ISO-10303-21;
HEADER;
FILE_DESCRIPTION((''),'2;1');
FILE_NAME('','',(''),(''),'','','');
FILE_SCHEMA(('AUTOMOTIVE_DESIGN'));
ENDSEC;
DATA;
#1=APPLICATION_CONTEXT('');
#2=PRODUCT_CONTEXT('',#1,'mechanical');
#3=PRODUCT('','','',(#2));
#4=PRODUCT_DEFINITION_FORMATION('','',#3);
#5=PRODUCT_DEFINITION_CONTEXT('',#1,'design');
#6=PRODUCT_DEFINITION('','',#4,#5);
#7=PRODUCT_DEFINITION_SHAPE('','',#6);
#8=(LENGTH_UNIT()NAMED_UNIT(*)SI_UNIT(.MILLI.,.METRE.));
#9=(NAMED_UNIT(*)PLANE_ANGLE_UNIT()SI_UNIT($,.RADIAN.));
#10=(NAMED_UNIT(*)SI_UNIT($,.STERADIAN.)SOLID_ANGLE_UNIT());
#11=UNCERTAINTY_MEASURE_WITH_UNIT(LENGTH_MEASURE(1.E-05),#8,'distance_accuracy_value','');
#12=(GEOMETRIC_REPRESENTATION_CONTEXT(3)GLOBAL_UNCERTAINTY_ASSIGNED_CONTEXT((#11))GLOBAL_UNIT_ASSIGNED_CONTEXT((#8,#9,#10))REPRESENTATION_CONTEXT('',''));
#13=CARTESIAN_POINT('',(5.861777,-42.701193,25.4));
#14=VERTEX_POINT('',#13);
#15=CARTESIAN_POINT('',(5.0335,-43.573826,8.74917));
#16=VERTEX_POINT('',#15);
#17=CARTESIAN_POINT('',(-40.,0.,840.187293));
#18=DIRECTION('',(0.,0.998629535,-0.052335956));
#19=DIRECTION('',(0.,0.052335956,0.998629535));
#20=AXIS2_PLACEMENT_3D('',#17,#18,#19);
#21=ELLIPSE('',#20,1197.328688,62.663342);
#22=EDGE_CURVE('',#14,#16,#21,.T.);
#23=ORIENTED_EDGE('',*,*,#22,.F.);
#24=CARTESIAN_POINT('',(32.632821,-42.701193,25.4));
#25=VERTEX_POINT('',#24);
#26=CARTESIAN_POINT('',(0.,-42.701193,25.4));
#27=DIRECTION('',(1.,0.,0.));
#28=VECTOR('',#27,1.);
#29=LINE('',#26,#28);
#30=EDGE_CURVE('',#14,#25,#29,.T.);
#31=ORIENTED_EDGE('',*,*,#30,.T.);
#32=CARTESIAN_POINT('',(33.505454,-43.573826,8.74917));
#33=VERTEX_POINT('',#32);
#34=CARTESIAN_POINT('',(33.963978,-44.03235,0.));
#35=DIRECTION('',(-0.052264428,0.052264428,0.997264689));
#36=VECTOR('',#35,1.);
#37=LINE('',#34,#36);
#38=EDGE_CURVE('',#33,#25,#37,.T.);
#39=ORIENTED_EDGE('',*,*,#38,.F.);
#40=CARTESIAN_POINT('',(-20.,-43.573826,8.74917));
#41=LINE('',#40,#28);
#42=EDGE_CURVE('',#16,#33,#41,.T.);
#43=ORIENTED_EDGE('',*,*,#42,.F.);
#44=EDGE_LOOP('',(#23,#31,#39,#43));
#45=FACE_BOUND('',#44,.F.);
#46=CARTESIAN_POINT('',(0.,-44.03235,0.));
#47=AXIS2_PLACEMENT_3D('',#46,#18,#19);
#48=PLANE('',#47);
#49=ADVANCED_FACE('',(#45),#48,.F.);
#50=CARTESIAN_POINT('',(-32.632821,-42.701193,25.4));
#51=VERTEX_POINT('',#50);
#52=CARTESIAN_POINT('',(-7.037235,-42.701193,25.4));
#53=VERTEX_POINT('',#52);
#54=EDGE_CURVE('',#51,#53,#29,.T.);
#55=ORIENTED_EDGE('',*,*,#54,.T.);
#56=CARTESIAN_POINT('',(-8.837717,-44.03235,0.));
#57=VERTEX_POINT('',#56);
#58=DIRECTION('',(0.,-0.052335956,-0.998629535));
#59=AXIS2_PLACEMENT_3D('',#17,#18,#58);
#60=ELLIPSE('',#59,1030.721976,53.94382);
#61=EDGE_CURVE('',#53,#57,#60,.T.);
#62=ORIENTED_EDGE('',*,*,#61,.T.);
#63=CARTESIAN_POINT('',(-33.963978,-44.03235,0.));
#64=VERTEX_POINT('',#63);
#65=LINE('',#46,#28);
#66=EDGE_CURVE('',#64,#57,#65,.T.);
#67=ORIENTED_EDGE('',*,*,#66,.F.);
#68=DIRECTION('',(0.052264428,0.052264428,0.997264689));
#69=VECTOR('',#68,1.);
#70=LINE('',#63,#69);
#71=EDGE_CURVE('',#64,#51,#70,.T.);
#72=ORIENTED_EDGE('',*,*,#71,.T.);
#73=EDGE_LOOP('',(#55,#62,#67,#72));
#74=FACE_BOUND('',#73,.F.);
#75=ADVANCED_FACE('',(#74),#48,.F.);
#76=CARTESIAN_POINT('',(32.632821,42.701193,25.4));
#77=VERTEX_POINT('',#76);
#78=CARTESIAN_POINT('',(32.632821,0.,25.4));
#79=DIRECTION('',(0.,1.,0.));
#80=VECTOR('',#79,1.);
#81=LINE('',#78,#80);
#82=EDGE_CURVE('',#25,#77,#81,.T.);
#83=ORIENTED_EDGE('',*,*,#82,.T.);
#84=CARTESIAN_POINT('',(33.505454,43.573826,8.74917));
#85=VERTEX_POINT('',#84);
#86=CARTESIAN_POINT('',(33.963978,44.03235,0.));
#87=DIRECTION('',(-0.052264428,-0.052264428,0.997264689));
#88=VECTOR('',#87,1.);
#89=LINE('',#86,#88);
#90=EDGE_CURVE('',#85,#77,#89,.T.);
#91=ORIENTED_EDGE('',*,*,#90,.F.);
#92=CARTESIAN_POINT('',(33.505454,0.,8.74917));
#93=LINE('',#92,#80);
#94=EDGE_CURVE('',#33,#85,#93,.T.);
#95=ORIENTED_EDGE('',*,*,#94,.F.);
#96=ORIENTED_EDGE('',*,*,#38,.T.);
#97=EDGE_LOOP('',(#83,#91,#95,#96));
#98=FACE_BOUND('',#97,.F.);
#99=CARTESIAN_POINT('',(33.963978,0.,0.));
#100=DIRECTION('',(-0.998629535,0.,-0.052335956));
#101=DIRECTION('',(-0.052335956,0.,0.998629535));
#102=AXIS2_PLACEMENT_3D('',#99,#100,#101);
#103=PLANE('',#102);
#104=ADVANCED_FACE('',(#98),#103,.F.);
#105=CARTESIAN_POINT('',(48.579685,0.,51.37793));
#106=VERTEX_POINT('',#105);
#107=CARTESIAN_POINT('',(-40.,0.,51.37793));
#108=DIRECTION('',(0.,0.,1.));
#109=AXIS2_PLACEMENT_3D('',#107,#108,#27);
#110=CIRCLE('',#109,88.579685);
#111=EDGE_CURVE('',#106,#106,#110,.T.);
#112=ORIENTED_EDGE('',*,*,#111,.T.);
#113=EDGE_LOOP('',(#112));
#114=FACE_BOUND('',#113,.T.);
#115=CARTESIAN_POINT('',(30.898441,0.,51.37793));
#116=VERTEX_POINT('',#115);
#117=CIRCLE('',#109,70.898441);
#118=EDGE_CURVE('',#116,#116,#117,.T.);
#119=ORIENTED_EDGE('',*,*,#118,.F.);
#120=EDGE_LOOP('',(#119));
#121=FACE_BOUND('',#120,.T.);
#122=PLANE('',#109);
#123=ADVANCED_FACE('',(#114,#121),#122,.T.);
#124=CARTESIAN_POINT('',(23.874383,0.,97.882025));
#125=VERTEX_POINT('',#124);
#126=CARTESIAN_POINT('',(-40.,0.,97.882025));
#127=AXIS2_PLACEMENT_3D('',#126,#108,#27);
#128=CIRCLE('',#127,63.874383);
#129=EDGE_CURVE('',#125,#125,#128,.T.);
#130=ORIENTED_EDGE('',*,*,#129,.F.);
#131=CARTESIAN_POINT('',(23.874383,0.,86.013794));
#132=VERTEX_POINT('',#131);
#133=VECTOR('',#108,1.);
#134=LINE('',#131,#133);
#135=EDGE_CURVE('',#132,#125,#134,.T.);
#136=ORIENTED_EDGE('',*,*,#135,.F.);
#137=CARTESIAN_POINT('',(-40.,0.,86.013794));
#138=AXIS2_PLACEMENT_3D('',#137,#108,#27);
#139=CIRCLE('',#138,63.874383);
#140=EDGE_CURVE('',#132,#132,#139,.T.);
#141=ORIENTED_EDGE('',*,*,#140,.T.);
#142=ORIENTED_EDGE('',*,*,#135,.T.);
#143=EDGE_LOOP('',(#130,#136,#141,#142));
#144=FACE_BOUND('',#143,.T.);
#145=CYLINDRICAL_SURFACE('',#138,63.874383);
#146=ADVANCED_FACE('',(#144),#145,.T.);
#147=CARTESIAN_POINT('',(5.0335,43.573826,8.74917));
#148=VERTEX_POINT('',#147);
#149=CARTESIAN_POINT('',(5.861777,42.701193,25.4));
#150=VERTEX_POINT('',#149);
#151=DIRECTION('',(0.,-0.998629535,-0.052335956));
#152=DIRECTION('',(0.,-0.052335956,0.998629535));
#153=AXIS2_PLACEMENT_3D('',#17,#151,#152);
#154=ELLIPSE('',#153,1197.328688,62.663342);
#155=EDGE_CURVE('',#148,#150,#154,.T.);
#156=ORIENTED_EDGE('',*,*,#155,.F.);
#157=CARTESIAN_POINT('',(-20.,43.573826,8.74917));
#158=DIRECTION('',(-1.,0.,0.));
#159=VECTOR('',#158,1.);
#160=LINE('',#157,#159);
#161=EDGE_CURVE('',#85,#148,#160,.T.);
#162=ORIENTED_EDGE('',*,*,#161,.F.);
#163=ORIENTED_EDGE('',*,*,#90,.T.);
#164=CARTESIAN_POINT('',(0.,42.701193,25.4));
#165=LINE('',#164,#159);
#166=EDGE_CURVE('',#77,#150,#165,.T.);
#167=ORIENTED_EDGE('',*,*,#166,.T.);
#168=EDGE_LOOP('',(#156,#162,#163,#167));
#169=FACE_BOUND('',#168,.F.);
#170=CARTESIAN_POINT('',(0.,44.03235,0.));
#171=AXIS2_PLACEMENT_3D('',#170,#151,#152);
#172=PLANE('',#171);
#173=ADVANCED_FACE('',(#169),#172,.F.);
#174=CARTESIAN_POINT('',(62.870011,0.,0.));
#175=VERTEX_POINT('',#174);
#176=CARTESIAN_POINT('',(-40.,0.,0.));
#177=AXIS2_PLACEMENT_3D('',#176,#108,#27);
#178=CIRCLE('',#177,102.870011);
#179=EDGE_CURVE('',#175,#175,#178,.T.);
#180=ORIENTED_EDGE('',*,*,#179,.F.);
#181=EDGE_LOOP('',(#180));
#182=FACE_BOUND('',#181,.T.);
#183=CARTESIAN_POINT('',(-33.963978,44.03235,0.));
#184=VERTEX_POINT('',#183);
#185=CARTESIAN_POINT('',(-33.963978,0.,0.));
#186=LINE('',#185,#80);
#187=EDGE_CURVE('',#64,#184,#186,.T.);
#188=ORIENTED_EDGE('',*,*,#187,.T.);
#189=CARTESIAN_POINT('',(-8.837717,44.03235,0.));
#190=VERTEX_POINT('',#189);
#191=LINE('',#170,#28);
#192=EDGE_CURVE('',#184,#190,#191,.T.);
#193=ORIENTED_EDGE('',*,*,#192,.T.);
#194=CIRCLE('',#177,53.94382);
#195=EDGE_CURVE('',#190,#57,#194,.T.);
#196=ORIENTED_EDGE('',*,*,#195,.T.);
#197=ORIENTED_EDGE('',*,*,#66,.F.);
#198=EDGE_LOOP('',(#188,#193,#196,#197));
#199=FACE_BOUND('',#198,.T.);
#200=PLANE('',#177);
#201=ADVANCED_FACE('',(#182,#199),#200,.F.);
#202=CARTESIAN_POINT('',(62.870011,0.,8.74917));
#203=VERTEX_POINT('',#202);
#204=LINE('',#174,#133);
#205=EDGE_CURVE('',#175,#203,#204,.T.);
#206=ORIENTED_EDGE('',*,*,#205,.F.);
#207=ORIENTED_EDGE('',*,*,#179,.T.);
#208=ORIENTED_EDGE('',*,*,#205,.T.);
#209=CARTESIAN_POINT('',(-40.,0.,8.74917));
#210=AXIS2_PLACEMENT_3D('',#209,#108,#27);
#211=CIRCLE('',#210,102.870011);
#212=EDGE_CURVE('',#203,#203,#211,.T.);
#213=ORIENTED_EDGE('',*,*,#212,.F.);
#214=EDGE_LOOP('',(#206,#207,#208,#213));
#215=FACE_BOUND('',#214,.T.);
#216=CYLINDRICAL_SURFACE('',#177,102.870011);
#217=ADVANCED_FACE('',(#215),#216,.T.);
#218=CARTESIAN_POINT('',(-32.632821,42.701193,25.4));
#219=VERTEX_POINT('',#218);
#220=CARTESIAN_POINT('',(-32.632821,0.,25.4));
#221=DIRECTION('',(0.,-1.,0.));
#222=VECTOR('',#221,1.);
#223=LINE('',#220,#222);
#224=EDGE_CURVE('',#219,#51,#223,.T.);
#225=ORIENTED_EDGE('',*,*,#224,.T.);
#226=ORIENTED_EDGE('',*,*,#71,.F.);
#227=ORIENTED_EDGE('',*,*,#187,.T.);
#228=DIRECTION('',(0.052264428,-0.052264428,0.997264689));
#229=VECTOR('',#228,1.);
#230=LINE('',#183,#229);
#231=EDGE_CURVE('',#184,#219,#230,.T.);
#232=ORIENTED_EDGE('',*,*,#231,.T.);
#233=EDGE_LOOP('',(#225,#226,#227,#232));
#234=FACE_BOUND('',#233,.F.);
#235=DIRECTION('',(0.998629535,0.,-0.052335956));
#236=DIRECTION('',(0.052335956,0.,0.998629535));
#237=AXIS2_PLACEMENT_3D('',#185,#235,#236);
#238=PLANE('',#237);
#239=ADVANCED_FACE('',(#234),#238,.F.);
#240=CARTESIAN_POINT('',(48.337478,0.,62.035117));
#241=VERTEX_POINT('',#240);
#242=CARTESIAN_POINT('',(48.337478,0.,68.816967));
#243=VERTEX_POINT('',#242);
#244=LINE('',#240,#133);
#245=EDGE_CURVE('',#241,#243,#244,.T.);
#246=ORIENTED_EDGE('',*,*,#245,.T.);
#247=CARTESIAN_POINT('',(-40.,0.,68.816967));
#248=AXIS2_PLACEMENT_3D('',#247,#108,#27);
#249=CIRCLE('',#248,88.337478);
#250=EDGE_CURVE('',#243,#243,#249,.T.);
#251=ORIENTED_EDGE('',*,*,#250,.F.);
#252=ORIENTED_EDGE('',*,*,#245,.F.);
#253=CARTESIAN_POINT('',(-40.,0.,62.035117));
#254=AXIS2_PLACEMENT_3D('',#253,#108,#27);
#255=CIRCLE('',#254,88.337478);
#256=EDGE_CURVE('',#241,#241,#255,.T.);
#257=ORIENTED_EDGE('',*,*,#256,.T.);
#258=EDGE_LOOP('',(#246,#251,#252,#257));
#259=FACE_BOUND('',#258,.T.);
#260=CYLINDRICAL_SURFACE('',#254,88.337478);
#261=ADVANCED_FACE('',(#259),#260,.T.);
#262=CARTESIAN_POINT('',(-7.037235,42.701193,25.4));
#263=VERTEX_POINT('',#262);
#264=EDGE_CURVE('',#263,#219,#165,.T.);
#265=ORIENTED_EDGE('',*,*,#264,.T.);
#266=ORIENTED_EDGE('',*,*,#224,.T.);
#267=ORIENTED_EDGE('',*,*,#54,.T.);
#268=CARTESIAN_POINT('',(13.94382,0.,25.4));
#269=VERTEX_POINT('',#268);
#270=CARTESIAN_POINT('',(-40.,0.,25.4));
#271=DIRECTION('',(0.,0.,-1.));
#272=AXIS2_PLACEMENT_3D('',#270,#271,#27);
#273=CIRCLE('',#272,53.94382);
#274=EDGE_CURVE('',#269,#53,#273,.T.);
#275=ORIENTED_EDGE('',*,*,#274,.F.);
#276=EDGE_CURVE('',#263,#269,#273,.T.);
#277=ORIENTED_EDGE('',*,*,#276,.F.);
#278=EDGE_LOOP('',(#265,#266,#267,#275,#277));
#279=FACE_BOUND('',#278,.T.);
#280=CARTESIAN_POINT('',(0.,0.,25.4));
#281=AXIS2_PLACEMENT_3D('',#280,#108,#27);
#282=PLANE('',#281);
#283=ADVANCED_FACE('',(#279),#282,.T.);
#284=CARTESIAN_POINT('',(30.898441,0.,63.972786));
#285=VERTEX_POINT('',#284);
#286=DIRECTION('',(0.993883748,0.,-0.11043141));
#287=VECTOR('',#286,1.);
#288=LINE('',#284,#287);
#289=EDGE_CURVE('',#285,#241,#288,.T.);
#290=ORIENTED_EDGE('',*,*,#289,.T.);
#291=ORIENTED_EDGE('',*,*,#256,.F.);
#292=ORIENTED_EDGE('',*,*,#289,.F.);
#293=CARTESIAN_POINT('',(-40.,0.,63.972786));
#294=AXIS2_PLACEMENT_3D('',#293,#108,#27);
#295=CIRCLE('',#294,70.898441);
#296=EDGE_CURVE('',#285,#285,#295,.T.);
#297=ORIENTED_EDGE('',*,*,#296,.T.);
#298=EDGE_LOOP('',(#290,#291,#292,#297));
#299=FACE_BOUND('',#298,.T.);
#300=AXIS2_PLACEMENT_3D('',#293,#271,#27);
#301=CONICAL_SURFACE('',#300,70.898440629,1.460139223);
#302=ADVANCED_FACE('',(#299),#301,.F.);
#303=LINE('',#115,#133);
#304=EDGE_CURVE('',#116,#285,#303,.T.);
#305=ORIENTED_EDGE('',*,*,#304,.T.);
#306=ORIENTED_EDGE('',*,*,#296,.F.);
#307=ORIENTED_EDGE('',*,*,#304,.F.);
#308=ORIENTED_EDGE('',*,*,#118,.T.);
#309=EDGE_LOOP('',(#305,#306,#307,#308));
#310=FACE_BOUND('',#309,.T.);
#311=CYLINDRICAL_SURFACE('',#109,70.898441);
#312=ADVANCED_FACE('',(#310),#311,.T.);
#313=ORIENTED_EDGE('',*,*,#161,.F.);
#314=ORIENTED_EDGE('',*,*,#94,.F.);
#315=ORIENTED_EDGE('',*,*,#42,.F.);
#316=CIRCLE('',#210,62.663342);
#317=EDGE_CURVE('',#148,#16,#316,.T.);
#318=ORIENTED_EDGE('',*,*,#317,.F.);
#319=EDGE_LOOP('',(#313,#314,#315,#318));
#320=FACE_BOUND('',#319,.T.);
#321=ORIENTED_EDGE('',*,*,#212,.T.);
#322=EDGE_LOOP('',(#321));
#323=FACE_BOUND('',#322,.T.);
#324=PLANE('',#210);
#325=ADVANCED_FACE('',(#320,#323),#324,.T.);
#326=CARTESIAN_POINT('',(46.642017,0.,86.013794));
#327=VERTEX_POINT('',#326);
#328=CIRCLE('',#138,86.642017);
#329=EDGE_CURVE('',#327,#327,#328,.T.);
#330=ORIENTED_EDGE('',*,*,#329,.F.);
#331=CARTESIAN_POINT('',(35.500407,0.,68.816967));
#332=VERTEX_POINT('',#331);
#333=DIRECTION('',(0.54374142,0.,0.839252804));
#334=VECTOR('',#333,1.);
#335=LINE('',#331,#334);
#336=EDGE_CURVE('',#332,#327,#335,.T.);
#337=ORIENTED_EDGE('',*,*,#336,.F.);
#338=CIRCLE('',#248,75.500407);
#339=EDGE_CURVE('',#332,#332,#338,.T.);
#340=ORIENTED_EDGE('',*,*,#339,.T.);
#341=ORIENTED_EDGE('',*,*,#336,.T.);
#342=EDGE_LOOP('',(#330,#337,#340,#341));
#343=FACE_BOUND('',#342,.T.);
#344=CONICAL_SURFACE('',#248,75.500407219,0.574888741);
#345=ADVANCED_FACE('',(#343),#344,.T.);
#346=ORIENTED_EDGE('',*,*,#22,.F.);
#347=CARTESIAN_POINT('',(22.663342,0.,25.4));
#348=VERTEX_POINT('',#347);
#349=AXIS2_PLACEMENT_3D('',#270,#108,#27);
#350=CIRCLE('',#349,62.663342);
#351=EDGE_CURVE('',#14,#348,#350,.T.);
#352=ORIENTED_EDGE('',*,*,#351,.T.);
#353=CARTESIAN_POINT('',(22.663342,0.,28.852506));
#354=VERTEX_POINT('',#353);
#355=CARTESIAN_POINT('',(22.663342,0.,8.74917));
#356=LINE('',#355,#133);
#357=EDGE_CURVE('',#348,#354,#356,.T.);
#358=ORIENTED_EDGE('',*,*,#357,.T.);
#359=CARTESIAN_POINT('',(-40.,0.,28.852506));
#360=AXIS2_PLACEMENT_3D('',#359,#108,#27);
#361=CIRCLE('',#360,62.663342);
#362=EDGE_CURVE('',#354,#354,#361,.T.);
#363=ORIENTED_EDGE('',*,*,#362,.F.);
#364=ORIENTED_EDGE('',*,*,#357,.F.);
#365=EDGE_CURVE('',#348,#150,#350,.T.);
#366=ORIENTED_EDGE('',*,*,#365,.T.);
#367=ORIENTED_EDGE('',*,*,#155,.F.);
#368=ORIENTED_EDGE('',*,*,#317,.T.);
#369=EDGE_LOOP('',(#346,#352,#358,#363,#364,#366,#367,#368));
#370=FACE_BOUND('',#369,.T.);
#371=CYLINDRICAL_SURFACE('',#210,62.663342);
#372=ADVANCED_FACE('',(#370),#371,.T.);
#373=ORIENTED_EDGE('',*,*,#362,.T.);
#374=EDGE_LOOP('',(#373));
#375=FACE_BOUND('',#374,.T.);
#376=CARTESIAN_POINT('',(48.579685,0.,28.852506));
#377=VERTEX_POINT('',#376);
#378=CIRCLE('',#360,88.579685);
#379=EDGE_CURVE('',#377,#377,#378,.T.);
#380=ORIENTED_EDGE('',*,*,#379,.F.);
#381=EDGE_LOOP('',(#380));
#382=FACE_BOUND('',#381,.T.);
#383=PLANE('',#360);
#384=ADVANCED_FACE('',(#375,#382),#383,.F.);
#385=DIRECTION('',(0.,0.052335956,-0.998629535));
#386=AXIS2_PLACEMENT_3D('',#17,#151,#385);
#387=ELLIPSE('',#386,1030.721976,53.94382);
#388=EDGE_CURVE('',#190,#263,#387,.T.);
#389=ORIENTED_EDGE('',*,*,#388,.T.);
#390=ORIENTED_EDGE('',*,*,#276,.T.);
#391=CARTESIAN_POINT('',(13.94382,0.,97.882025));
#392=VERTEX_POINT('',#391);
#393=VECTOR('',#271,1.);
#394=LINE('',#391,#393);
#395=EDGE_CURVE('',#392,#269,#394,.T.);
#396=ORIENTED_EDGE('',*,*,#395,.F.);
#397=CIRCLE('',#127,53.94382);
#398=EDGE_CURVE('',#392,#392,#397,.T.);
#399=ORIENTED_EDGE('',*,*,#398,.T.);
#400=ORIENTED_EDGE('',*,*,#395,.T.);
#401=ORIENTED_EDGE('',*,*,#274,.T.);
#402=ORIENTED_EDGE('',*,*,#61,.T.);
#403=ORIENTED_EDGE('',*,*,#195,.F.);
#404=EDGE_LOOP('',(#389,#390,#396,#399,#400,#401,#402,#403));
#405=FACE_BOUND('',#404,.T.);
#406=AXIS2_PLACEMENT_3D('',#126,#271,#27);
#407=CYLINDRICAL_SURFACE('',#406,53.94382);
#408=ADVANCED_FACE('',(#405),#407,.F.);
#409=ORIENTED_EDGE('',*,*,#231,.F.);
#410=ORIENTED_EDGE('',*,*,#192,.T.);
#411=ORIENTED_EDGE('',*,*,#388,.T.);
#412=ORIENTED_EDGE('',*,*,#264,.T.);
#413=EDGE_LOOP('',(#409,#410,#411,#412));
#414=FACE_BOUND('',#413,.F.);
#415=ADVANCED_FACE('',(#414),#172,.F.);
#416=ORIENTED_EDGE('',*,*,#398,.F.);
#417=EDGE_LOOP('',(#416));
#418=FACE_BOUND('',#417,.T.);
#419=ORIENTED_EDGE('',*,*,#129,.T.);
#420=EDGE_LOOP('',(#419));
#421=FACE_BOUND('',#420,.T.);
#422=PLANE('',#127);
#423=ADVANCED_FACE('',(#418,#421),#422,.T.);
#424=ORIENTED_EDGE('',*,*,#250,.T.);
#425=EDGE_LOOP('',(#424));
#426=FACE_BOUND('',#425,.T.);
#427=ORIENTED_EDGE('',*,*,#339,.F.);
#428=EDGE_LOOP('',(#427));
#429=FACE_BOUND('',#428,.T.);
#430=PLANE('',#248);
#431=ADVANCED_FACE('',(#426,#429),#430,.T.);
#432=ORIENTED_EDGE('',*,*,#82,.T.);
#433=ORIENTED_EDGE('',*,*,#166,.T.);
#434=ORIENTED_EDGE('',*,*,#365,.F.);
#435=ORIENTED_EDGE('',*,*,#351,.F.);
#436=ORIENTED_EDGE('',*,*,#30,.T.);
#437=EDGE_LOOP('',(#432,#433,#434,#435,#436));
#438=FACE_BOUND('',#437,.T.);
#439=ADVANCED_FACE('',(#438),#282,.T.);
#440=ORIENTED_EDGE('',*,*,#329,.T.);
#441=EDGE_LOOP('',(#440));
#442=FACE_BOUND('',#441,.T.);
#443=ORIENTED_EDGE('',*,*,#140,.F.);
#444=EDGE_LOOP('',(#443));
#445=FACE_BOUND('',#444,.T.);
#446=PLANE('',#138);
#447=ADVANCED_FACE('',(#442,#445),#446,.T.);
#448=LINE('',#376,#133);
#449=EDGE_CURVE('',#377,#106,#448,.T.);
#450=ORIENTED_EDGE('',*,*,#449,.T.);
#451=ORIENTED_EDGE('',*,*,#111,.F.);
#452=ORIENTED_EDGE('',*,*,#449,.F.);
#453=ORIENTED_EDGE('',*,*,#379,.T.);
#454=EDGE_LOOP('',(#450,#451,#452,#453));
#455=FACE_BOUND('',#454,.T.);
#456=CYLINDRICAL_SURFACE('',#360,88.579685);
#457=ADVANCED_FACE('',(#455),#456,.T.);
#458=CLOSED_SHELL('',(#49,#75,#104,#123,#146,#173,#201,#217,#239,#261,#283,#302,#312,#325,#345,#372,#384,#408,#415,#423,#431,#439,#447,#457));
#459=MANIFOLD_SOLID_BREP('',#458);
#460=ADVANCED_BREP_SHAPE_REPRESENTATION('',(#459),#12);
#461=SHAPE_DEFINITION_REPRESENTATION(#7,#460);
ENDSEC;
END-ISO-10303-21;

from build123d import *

# Parameters (mm, degrees)
F0_W     = 67.9279565811
F0_H     = 88.0647003651
F1_DEPTH = 25.4
F1_TAPER = 3


# Not quite as in the source:
# - a feature of the source that left no trace in its solid (it failed there, or was rolled back) is left out


with BuildPart() as f1:
    # F0 (on Top) → F1 (new body)
    with BuildSketch(Plane.XY):
        Rectangle(F0_W, F0_H)
    extrude(amount=F1_DEPTH, taper=F1_TAPER)

    # F2 (on Front) → F3 (revolve)
    with BuildSketch(Plane.XZ):
        Polygon((13.9438202605, 97.8820249438), (13.9438202605, 0), (62.8700107336, 0), (62.8700107336, 8.7491702288), (22.6633418351, 8.7491702288), (22.6633418351, 28.8525056094), (48.57968539, 28.8525056094), (48.57968539, 51.3779297471), (30.8984406292, 51.3779297471), (30.8984406292, 63.9727860689), (48.3374781907, 62.0351172984), (48.3374781907, 68.8169673085), (35.5004072189, 68.8169673085), (46.6420166194, 86.0137939453), (23.8743834198, 86.0137939453), (23.8743834198, 97.8820249438), align=None)
    revolve(axis=Axis((-40, 0, 38.2511918375), (0, 0, 1)))


solid = f1.part
